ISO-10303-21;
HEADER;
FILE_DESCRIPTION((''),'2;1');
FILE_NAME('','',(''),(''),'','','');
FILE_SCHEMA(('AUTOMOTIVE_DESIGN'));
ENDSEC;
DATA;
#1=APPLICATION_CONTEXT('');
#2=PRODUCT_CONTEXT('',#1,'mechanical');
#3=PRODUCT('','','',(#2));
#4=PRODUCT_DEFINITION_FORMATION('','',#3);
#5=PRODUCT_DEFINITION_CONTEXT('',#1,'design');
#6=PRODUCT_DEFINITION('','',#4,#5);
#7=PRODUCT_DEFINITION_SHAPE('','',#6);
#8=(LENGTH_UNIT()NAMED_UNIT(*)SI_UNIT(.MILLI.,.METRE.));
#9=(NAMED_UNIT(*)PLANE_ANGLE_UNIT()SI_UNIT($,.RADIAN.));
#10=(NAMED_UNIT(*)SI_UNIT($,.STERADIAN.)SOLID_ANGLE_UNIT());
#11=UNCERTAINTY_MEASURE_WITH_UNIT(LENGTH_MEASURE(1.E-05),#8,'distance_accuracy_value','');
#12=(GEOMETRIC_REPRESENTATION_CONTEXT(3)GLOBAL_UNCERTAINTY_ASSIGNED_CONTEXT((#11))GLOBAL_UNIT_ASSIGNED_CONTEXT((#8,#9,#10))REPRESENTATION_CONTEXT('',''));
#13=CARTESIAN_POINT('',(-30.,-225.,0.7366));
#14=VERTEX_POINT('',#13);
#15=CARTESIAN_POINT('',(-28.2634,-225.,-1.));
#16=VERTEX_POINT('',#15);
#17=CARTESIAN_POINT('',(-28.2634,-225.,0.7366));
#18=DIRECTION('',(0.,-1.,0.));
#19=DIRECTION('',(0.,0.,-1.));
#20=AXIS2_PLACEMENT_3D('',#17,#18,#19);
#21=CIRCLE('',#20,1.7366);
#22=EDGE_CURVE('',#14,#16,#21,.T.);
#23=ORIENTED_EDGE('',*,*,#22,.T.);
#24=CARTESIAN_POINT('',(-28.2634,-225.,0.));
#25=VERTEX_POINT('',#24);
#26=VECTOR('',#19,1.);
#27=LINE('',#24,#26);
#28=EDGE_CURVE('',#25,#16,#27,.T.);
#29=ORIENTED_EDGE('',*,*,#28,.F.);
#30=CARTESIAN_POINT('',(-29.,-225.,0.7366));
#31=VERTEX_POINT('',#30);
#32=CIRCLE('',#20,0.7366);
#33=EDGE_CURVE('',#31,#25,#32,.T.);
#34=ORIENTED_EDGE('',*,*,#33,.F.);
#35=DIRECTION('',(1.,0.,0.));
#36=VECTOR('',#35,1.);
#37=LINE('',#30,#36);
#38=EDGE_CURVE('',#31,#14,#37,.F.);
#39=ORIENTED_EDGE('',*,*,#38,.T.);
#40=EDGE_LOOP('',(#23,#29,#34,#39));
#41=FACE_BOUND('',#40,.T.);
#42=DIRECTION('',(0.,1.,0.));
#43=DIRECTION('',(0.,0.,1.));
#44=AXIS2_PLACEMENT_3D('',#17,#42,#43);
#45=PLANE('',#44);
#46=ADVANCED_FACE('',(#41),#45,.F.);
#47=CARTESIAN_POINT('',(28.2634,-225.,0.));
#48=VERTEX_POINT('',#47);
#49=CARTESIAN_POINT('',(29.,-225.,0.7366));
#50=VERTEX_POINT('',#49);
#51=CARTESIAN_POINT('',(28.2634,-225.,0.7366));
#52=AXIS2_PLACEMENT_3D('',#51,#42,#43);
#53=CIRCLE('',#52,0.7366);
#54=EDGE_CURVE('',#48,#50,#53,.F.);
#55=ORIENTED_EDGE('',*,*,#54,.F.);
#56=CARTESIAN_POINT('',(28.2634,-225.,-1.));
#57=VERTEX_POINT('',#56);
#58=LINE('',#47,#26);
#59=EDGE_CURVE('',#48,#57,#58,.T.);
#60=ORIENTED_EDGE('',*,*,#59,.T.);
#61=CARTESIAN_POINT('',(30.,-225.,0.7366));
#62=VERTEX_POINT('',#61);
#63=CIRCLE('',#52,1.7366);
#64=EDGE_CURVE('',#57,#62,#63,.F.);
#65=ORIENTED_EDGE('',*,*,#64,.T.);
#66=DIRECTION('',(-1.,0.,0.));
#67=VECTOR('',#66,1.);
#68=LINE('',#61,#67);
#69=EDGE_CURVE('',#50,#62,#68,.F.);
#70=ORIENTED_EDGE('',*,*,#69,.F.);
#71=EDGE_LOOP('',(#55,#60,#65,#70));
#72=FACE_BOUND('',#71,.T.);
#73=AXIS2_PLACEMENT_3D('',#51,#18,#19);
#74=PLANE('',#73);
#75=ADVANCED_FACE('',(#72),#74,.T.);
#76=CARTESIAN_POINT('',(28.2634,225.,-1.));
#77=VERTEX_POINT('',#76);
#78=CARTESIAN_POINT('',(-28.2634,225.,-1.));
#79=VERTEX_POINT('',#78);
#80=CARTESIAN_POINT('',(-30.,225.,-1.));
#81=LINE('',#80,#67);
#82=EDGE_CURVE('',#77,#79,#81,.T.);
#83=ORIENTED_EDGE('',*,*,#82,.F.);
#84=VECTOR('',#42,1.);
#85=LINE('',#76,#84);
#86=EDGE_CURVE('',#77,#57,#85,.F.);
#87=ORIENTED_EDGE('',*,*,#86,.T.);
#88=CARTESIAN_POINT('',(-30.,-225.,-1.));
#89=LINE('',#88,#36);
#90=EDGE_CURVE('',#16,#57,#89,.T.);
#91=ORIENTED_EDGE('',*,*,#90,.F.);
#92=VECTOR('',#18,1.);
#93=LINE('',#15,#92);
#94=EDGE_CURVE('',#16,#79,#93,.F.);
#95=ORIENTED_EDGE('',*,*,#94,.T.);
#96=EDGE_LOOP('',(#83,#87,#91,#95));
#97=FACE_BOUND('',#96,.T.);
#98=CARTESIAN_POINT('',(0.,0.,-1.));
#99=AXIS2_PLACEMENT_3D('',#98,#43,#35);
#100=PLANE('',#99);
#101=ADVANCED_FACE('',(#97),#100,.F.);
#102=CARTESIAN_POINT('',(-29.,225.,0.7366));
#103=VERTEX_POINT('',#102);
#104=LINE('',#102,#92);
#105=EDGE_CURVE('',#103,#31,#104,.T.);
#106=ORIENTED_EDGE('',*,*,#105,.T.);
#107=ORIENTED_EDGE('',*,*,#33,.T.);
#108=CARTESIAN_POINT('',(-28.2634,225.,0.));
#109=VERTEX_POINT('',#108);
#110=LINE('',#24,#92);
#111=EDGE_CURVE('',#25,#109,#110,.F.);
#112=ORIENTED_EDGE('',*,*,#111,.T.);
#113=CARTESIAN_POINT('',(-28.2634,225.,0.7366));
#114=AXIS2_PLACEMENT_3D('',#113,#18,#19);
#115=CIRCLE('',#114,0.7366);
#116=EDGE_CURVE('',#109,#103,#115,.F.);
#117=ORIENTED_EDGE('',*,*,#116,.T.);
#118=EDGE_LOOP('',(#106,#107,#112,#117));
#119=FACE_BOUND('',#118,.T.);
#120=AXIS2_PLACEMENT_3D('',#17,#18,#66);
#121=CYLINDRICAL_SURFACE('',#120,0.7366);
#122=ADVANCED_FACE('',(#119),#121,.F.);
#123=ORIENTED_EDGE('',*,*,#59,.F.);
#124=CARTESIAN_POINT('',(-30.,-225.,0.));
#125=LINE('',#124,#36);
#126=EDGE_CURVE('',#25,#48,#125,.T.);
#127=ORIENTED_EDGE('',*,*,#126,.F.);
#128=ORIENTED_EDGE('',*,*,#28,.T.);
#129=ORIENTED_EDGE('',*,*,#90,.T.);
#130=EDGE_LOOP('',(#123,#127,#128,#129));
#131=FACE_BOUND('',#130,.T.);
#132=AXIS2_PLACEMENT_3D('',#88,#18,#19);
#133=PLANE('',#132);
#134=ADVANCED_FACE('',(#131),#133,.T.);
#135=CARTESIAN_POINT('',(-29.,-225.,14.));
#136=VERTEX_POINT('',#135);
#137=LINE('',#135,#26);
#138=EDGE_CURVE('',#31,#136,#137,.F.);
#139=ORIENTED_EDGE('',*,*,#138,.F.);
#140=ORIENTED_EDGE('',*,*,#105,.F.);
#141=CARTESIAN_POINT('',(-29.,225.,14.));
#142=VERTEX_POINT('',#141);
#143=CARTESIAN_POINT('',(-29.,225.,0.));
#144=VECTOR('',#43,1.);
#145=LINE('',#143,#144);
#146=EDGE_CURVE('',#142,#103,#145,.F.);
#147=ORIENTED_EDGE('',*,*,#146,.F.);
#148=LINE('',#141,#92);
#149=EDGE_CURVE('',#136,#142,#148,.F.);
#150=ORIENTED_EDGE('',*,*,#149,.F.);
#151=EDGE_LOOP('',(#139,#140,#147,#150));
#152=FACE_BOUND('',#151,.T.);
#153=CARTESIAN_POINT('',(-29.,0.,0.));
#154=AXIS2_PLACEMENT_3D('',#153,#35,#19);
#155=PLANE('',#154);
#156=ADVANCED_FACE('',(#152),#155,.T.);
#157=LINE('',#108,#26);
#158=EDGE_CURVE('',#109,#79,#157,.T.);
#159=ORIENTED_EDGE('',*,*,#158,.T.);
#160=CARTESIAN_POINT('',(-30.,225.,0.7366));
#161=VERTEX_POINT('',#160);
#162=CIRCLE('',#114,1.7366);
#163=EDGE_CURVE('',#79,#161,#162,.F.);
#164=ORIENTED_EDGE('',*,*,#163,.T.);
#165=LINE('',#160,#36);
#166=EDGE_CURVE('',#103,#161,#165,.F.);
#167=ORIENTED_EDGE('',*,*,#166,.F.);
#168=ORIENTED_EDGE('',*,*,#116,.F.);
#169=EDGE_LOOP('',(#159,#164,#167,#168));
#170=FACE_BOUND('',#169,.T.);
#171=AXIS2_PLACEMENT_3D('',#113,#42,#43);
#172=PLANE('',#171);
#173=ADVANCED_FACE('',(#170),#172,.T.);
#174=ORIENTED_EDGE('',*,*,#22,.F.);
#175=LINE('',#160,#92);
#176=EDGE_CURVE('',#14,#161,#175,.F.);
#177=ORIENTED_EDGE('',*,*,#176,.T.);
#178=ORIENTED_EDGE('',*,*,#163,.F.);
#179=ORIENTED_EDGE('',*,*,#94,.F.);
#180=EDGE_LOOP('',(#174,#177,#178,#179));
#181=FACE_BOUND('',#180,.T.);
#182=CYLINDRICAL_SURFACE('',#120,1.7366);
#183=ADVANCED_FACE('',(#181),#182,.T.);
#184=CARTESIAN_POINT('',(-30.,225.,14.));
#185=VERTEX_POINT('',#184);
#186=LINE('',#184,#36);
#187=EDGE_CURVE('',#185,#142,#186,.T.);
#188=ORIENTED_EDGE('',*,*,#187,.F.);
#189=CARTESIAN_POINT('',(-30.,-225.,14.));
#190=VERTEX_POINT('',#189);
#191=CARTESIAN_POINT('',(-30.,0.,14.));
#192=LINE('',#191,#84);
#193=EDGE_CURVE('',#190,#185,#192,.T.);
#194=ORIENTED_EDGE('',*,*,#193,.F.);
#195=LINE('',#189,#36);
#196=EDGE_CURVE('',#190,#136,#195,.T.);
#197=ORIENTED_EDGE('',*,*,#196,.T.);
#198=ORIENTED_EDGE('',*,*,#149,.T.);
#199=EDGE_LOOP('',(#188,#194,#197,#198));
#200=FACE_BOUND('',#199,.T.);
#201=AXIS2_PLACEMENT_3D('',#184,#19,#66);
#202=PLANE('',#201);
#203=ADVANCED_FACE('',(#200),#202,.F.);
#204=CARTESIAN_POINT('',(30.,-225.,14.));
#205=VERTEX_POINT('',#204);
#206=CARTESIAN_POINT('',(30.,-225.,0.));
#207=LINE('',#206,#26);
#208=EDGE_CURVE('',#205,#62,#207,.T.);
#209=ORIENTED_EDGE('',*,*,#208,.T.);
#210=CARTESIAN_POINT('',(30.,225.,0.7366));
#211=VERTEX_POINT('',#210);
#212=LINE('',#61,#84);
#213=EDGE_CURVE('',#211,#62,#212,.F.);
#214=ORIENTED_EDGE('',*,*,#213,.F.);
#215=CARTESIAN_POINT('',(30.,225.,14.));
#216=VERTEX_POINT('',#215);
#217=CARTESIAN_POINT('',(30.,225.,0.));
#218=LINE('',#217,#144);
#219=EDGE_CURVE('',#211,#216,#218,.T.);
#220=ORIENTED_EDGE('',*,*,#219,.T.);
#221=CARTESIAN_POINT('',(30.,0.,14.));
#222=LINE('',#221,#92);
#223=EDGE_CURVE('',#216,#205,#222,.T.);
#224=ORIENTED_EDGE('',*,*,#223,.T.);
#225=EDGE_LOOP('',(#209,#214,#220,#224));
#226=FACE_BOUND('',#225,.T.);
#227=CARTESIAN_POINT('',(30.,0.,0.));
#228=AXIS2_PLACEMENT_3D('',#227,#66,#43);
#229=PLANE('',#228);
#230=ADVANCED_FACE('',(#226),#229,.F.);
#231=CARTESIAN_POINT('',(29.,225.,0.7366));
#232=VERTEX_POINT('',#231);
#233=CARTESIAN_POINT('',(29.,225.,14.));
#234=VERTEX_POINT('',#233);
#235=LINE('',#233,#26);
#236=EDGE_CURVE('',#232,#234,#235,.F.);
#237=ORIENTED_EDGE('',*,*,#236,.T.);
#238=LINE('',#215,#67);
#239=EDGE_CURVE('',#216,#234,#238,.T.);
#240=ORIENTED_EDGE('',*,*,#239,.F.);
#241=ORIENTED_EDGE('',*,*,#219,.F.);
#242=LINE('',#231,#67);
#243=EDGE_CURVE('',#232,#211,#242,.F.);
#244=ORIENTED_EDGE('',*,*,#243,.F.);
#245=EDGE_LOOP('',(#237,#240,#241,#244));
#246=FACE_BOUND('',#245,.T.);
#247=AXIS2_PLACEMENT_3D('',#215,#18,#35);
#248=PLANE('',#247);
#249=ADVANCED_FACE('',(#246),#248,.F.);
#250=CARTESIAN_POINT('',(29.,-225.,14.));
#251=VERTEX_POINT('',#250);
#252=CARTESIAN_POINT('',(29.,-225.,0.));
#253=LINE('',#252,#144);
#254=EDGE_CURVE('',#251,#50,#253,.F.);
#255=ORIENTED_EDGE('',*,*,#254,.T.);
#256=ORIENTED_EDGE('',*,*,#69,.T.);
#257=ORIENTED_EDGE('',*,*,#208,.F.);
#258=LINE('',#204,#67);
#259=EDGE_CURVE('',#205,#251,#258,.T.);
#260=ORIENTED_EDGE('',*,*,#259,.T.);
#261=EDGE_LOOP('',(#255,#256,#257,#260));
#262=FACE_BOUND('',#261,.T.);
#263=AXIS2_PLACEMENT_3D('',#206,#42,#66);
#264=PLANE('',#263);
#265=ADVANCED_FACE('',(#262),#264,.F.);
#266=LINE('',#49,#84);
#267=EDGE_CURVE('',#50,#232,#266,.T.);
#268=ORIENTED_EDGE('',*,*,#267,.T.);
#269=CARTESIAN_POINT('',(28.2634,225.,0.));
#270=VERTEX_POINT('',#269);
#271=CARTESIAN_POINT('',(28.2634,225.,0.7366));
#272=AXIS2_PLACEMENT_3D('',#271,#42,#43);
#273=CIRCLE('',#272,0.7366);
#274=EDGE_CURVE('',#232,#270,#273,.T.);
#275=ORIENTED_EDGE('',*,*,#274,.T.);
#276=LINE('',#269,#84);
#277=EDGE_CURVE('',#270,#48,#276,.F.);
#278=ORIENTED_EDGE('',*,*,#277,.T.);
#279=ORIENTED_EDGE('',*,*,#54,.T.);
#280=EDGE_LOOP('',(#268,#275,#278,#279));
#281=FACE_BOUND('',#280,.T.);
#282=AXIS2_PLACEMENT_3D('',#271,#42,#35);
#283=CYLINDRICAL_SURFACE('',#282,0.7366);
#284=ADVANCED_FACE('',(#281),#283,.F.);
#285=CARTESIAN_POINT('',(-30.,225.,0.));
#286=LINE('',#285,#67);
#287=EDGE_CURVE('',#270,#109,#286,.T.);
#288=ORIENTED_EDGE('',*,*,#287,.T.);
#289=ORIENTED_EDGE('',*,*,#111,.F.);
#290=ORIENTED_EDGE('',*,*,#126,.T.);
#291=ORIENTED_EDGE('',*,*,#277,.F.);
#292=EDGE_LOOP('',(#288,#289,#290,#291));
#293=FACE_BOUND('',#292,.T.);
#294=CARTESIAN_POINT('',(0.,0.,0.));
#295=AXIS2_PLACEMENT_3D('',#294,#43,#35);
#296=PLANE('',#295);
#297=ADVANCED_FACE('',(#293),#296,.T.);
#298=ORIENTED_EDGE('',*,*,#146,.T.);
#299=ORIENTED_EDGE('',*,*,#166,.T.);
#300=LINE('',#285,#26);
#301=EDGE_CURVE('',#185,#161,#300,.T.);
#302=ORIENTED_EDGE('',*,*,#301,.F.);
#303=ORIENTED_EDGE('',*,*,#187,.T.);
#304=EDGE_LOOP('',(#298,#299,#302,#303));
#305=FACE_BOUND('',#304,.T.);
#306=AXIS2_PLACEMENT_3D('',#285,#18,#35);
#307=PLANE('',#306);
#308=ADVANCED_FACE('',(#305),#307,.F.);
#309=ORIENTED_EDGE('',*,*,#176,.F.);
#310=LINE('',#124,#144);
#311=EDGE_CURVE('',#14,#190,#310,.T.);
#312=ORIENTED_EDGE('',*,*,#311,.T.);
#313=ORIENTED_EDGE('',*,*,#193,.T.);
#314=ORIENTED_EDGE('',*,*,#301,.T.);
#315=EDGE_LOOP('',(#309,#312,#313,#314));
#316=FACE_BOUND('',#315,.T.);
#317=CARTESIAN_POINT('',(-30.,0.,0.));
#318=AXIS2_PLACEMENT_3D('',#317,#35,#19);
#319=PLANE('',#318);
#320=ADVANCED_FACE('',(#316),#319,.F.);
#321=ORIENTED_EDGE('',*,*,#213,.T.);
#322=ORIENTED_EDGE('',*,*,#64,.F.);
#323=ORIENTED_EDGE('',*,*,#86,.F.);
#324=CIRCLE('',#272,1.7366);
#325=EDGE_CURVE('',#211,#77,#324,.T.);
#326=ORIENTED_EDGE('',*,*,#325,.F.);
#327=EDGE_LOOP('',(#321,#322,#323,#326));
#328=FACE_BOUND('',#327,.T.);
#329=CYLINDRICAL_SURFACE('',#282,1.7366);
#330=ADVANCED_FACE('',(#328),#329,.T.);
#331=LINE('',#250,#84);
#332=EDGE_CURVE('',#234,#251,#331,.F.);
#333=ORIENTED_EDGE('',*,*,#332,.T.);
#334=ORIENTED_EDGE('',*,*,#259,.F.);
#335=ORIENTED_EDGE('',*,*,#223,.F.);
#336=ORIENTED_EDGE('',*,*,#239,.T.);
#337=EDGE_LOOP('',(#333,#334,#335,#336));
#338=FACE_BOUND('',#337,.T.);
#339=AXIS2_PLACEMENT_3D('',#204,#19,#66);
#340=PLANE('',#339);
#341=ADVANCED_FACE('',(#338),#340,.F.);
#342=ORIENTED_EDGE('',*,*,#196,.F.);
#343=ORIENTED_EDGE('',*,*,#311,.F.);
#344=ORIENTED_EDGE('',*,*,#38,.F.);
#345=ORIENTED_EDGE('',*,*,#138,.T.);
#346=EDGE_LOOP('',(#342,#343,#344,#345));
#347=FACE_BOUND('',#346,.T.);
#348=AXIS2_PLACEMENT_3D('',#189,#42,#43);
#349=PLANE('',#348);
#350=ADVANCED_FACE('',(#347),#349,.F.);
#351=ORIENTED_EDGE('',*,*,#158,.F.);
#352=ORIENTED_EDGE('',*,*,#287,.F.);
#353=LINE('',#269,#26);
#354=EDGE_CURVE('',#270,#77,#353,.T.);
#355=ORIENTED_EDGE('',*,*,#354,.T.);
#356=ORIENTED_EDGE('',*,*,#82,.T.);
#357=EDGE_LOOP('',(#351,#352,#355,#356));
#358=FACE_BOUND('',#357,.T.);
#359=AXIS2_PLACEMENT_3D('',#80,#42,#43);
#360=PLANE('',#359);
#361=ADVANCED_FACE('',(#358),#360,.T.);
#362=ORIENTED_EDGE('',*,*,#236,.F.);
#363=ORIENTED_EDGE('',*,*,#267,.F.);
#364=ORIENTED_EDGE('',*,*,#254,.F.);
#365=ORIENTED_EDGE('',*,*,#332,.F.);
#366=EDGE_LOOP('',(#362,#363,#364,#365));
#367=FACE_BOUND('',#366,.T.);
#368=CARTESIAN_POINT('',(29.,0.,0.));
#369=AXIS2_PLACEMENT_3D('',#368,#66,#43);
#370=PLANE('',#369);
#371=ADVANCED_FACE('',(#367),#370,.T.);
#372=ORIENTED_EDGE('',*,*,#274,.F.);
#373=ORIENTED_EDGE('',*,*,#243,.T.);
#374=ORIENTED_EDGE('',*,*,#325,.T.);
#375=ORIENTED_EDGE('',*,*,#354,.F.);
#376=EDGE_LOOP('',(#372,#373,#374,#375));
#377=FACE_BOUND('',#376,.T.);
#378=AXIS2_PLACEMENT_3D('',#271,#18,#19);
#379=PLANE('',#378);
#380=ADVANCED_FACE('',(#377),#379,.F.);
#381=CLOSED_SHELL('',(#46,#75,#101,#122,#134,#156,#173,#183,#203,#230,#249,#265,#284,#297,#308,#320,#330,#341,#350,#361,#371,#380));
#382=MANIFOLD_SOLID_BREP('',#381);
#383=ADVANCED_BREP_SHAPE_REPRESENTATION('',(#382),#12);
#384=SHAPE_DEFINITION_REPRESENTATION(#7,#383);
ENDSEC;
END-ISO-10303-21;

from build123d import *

# Parameters (mm, degrees)
SKETCH1_W                      = 60
SKETCH1_H                      = 450
BASE_FLANGE1_DEPTH             = 1
EDGE_FLANGE1_STRIP_W           = 5.4732
EDGE_FLANGE1_STRIP_H           = 1
EDGE_FLANGE1_STRIP_CUT_DEPTH   = 450
EDGE_FLANGE1_STRIP_2_W         = 5.4732
EDGE_FLANGE1_STRIP_2_H         = 1
EDGE_FLANGE1_STRIP_CUT_2_DEPTH = 450
EDGE_FLANGE1_DEPTH             = 450
EDGE_FLANGE1_BEND_DEPTH        = 450


# Sheet-metal steps are written as plain solids
with BuildPart() as part:
    # Sketch1 → Base-Flange1 (new body)
    with BuildSketch(Plane.XY):
        Rectangle(SKETCH1_W, SKETCH1_H)
    extrude(amount=-BASE_FLANGE1_DEPTH)

    # Edge-Flange1 strip (across the edge) → Edge-Flange1 strip cut (cut)
    with BuildSketch(Plane(origin=(30, -225, 0), x_dir=(-1, 0, 0), z_dir=(0, 1, 0))):
        with Locations((-1, -0.5)):
            Rectangle(EDGE_FLANGE1_STRIP_W, EDGE_FLANGE1_STRIP_H)
    extrude(amount=EDGE_FLANGE1_STRIP_CUT_DEPTH, mode=Mode.SUBTRACT)

    # Edge-Flange1 strip 2 (across the edge) → Edge-Flange1 strip cut 2 (cut)
    with BuildSketch(Plane(origin=(-30, 225, 0), x_dir=(1, 0, 0), z_dir=(0, -1, 0))):
        with Locations((-1, -0.5)):
            Rectangle(EDGE_FLANGE1_STRIP_2_W, EDGE_FLANGE1_STRIP_2_H)
    extrude(amount=EDGE_FLANGE1_STRIP_CUT_2_DEPTH, mode=Mode.SUBTRACT)

    # Edge-Flange1 section (across the edge) → Edge-Flange1 (add)
    with BuildSketch(Plane(origin=(30, -225, 0), x_dir=(-1, 0, 0), z_dir=(0, 1, 0))):
        with BuildLine():
            Line((0, 0.7366), (0, 14))
            Line((0, 14), (1, 14))
            Line((1, 14), (1, 0.7366))
            ThreePointArc((1, 0.7366), (1.215745145, 0.215745145), (1.7366, 0))
            Line((1.7366, 0), (1.7366, -1))
            ThreePointArc((1.7366, -1), (0.508638364, -0.491361636), (0, 0.7366))
        make_face()
    extrude(amount=EDGE_FLANGE1_DEPTH)

    # Edge-Flange1 section 2 (across the edge) → Edge-Flange1 bend (add)
    with BuildSketch(Plane(origin=(-30, 225, 0), x_dir=(1, 0, 0), z_dir=(0, -1, 0))):
        with BuildLine():
            Line((0, 0.7366), (0, 14))
            Line((0, 14), (1, 14))
            Line((1, 14), (1, 0.7366))
            ThreePointArc((1, 0.7366), (1.215745145, 0.215745145), (1.7366, 0))
            Line((1.7366, 0), (1.7366, -1))
            ThreePointArc((1.7366, -1), (0.508638364, -0.491361636), (0, 0.7366))
        make_face()
    extrude(amount=EDGE_FLANGE1_BEND_DEPTH)


solid = part.part
